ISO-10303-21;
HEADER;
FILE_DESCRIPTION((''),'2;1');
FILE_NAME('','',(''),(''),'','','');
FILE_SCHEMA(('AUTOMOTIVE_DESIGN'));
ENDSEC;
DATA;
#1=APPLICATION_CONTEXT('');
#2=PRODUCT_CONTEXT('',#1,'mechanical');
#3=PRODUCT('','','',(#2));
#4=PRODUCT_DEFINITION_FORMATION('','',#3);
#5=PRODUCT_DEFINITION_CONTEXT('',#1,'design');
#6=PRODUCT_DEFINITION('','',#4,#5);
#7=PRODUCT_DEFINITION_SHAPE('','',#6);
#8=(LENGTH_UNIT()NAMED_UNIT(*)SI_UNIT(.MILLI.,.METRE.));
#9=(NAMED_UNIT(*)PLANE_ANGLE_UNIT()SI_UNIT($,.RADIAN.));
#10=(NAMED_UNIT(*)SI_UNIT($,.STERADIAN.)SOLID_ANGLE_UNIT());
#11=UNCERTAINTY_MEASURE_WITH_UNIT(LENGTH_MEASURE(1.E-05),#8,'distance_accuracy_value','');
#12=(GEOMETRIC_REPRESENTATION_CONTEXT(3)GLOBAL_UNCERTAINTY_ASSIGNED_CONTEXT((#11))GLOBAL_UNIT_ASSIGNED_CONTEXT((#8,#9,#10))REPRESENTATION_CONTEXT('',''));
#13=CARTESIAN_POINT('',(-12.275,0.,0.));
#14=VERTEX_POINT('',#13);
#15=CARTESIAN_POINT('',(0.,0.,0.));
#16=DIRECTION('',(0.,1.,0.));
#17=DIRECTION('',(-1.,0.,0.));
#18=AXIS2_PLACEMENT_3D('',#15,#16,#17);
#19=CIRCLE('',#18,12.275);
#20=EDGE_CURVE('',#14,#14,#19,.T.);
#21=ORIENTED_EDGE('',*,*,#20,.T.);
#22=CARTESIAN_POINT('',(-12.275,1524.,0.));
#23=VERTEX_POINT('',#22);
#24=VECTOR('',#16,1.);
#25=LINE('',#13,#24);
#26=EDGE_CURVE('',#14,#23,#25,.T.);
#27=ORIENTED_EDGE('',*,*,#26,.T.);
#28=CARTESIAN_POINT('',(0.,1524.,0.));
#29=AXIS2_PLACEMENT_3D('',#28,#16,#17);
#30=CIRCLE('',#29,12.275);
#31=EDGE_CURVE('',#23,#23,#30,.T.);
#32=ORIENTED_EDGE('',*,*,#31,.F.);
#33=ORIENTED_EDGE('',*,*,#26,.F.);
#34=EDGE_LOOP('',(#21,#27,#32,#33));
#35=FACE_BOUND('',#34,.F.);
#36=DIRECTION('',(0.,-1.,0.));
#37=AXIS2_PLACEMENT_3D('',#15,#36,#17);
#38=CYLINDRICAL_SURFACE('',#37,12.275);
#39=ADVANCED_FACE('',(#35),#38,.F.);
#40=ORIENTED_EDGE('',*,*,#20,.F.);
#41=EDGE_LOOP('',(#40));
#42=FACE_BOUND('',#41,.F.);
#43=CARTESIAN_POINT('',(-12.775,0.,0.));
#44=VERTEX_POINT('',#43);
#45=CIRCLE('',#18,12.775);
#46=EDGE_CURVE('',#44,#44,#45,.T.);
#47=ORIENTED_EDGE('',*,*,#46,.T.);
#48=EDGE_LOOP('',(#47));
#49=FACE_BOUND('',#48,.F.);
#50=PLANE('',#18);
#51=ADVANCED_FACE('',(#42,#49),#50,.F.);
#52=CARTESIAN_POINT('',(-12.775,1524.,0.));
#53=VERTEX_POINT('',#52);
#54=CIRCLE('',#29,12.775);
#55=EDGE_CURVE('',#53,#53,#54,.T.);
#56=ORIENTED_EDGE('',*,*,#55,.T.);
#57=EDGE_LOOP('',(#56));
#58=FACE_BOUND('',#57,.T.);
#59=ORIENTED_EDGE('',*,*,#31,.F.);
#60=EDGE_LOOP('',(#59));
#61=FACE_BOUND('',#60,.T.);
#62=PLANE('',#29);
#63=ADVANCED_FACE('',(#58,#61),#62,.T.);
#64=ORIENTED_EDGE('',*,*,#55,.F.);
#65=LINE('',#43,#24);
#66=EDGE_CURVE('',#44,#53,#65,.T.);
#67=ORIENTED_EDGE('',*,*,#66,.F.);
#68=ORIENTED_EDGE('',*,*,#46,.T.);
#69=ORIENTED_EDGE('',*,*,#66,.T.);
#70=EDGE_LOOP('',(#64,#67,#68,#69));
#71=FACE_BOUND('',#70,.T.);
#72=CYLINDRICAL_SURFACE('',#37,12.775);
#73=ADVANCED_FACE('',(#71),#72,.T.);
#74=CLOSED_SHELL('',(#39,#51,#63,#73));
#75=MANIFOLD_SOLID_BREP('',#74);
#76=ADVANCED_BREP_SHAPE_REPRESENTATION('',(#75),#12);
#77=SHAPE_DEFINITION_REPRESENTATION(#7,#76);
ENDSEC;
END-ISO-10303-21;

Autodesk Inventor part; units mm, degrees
ref_plane "YZ Plane" through (0, 0, 0) normal (1, 0, 0) x (0, 1, 0)
ref_plane "XZ Plane" through (0, 0, 0) normal (0, 1, 0) x (-1, 0, 0)
ref_plane "XY Plane" through (0, 0, 0) normal (0, 0, 1) x (1, 0, 0)
sketch "Sketch3" plane through (0, 0, 0) normal (0, 1, 0) x (-1, 0, 0)
  circle A0 centre (0, 0) radius 12.775
  circle A1 centre (0, 0) radius 12.275
  dimension "d5" = 25.55
  dimension "d6" = 0.5
extrude "Extrusion3" add sketch "Sketch3" along normal blind 1524
properties part number "pole_v1"
